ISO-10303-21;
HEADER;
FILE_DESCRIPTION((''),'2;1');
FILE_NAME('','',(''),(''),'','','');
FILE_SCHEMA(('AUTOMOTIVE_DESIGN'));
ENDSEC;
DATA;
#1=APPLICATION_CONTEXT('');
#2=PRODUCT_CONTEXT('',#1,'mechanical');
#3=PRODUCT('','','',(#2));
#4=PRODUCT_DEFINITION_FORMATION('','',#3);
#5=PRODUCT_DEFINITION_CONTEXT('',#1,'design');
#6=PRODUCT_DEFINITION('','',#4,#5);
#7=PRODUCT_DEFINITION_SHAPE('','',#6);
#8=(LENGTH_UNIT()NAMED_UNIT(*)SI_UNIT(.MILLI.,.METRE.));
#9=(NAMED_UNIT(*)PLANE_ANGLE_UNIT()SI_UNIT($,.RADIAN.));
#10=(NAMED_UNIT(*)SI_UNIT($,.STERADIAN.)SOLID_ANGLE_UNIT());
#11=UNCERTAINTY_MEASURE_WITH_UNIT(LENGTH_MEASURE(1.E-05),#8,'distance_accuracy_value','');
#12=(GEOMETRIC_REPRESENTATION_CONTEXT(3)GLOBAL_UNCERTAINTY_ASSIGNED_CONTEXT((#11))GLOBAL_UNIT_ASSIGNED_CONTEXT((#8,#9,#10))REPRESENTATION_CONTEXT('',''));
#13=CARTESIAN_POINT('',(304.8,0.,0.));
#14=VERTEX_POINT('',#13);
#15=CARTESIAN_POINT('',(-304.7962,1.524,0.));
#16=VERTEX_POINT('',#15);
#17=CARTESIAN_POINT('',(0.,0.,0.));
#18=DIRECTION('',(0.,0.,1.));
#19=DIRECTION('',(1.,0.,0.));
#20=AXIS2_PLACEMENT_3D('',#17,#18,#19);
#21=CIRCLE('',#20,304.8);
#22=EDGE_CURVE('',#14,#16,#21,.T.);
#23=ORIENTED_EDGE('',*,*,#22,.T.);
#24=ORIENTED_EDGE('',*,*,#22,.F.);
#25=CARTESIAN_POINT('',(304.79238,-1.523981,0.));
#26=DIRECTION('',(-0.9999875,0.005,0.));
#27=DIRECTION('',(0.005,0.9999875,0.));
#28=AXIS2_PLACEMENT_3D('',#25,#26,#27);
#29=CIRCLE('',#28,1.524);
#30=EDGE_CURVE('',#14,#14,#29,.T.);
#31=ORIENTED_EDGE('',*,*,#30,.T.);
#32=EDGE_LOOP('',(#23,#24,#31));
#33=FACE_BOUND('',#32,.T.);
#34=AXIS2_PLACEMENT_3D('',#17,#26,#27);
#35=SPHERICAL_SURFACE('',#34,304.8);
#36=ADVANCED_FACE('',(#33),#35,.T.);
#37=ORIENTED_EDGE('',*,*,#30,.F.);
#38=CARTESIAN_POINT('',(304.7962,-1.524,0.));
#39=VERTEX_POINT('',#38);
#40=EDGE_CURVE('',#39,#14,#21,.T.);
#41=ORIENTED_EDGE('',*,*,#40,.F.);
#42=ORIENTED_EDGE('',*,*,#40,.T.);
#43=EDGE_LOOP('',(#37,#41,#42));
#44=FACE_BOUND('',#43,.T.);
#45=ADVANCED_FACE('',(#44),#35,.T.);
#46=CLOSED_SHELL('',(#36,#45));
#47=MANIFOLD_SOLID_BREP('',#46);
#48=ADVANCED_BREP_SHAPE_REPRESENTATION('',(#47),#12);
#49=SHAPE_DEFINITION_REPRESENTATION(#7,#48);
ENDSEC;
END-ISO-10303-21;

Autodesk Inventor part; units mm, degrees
ref_plane "YZ Plane" through (0, 0, 0) normal (1, 0, 0) x (0, 1, 0)
ref_plane "XZ Plane" through (0, 0, 0) normal (0, 1, 0) x (-1, 0, 0)
ref_plane "XY Plane" through (0, 0, 0) normal (0, 0, 1) x (1, 0, 0)
sketch "Sketch1" plane through (0, 0, 0) normal (0, 0, 1) x (1, 0, 0)
  circle A0 centre (0, 0) radius 304.8
  line L0 (304.7962, -1.524) -> (-304.7962, 1.524)
  dimension "d0" = 609.6
revolve "Revolution1" add sketch "Sketch1" angle 360 about axis through (304.7962, -1.524, 0) along (-0.9999875, 0.0049999, 0) picked at (-48.3498, 174.1022) contours A0 L0
properties part number "ball" material "Ball material"
